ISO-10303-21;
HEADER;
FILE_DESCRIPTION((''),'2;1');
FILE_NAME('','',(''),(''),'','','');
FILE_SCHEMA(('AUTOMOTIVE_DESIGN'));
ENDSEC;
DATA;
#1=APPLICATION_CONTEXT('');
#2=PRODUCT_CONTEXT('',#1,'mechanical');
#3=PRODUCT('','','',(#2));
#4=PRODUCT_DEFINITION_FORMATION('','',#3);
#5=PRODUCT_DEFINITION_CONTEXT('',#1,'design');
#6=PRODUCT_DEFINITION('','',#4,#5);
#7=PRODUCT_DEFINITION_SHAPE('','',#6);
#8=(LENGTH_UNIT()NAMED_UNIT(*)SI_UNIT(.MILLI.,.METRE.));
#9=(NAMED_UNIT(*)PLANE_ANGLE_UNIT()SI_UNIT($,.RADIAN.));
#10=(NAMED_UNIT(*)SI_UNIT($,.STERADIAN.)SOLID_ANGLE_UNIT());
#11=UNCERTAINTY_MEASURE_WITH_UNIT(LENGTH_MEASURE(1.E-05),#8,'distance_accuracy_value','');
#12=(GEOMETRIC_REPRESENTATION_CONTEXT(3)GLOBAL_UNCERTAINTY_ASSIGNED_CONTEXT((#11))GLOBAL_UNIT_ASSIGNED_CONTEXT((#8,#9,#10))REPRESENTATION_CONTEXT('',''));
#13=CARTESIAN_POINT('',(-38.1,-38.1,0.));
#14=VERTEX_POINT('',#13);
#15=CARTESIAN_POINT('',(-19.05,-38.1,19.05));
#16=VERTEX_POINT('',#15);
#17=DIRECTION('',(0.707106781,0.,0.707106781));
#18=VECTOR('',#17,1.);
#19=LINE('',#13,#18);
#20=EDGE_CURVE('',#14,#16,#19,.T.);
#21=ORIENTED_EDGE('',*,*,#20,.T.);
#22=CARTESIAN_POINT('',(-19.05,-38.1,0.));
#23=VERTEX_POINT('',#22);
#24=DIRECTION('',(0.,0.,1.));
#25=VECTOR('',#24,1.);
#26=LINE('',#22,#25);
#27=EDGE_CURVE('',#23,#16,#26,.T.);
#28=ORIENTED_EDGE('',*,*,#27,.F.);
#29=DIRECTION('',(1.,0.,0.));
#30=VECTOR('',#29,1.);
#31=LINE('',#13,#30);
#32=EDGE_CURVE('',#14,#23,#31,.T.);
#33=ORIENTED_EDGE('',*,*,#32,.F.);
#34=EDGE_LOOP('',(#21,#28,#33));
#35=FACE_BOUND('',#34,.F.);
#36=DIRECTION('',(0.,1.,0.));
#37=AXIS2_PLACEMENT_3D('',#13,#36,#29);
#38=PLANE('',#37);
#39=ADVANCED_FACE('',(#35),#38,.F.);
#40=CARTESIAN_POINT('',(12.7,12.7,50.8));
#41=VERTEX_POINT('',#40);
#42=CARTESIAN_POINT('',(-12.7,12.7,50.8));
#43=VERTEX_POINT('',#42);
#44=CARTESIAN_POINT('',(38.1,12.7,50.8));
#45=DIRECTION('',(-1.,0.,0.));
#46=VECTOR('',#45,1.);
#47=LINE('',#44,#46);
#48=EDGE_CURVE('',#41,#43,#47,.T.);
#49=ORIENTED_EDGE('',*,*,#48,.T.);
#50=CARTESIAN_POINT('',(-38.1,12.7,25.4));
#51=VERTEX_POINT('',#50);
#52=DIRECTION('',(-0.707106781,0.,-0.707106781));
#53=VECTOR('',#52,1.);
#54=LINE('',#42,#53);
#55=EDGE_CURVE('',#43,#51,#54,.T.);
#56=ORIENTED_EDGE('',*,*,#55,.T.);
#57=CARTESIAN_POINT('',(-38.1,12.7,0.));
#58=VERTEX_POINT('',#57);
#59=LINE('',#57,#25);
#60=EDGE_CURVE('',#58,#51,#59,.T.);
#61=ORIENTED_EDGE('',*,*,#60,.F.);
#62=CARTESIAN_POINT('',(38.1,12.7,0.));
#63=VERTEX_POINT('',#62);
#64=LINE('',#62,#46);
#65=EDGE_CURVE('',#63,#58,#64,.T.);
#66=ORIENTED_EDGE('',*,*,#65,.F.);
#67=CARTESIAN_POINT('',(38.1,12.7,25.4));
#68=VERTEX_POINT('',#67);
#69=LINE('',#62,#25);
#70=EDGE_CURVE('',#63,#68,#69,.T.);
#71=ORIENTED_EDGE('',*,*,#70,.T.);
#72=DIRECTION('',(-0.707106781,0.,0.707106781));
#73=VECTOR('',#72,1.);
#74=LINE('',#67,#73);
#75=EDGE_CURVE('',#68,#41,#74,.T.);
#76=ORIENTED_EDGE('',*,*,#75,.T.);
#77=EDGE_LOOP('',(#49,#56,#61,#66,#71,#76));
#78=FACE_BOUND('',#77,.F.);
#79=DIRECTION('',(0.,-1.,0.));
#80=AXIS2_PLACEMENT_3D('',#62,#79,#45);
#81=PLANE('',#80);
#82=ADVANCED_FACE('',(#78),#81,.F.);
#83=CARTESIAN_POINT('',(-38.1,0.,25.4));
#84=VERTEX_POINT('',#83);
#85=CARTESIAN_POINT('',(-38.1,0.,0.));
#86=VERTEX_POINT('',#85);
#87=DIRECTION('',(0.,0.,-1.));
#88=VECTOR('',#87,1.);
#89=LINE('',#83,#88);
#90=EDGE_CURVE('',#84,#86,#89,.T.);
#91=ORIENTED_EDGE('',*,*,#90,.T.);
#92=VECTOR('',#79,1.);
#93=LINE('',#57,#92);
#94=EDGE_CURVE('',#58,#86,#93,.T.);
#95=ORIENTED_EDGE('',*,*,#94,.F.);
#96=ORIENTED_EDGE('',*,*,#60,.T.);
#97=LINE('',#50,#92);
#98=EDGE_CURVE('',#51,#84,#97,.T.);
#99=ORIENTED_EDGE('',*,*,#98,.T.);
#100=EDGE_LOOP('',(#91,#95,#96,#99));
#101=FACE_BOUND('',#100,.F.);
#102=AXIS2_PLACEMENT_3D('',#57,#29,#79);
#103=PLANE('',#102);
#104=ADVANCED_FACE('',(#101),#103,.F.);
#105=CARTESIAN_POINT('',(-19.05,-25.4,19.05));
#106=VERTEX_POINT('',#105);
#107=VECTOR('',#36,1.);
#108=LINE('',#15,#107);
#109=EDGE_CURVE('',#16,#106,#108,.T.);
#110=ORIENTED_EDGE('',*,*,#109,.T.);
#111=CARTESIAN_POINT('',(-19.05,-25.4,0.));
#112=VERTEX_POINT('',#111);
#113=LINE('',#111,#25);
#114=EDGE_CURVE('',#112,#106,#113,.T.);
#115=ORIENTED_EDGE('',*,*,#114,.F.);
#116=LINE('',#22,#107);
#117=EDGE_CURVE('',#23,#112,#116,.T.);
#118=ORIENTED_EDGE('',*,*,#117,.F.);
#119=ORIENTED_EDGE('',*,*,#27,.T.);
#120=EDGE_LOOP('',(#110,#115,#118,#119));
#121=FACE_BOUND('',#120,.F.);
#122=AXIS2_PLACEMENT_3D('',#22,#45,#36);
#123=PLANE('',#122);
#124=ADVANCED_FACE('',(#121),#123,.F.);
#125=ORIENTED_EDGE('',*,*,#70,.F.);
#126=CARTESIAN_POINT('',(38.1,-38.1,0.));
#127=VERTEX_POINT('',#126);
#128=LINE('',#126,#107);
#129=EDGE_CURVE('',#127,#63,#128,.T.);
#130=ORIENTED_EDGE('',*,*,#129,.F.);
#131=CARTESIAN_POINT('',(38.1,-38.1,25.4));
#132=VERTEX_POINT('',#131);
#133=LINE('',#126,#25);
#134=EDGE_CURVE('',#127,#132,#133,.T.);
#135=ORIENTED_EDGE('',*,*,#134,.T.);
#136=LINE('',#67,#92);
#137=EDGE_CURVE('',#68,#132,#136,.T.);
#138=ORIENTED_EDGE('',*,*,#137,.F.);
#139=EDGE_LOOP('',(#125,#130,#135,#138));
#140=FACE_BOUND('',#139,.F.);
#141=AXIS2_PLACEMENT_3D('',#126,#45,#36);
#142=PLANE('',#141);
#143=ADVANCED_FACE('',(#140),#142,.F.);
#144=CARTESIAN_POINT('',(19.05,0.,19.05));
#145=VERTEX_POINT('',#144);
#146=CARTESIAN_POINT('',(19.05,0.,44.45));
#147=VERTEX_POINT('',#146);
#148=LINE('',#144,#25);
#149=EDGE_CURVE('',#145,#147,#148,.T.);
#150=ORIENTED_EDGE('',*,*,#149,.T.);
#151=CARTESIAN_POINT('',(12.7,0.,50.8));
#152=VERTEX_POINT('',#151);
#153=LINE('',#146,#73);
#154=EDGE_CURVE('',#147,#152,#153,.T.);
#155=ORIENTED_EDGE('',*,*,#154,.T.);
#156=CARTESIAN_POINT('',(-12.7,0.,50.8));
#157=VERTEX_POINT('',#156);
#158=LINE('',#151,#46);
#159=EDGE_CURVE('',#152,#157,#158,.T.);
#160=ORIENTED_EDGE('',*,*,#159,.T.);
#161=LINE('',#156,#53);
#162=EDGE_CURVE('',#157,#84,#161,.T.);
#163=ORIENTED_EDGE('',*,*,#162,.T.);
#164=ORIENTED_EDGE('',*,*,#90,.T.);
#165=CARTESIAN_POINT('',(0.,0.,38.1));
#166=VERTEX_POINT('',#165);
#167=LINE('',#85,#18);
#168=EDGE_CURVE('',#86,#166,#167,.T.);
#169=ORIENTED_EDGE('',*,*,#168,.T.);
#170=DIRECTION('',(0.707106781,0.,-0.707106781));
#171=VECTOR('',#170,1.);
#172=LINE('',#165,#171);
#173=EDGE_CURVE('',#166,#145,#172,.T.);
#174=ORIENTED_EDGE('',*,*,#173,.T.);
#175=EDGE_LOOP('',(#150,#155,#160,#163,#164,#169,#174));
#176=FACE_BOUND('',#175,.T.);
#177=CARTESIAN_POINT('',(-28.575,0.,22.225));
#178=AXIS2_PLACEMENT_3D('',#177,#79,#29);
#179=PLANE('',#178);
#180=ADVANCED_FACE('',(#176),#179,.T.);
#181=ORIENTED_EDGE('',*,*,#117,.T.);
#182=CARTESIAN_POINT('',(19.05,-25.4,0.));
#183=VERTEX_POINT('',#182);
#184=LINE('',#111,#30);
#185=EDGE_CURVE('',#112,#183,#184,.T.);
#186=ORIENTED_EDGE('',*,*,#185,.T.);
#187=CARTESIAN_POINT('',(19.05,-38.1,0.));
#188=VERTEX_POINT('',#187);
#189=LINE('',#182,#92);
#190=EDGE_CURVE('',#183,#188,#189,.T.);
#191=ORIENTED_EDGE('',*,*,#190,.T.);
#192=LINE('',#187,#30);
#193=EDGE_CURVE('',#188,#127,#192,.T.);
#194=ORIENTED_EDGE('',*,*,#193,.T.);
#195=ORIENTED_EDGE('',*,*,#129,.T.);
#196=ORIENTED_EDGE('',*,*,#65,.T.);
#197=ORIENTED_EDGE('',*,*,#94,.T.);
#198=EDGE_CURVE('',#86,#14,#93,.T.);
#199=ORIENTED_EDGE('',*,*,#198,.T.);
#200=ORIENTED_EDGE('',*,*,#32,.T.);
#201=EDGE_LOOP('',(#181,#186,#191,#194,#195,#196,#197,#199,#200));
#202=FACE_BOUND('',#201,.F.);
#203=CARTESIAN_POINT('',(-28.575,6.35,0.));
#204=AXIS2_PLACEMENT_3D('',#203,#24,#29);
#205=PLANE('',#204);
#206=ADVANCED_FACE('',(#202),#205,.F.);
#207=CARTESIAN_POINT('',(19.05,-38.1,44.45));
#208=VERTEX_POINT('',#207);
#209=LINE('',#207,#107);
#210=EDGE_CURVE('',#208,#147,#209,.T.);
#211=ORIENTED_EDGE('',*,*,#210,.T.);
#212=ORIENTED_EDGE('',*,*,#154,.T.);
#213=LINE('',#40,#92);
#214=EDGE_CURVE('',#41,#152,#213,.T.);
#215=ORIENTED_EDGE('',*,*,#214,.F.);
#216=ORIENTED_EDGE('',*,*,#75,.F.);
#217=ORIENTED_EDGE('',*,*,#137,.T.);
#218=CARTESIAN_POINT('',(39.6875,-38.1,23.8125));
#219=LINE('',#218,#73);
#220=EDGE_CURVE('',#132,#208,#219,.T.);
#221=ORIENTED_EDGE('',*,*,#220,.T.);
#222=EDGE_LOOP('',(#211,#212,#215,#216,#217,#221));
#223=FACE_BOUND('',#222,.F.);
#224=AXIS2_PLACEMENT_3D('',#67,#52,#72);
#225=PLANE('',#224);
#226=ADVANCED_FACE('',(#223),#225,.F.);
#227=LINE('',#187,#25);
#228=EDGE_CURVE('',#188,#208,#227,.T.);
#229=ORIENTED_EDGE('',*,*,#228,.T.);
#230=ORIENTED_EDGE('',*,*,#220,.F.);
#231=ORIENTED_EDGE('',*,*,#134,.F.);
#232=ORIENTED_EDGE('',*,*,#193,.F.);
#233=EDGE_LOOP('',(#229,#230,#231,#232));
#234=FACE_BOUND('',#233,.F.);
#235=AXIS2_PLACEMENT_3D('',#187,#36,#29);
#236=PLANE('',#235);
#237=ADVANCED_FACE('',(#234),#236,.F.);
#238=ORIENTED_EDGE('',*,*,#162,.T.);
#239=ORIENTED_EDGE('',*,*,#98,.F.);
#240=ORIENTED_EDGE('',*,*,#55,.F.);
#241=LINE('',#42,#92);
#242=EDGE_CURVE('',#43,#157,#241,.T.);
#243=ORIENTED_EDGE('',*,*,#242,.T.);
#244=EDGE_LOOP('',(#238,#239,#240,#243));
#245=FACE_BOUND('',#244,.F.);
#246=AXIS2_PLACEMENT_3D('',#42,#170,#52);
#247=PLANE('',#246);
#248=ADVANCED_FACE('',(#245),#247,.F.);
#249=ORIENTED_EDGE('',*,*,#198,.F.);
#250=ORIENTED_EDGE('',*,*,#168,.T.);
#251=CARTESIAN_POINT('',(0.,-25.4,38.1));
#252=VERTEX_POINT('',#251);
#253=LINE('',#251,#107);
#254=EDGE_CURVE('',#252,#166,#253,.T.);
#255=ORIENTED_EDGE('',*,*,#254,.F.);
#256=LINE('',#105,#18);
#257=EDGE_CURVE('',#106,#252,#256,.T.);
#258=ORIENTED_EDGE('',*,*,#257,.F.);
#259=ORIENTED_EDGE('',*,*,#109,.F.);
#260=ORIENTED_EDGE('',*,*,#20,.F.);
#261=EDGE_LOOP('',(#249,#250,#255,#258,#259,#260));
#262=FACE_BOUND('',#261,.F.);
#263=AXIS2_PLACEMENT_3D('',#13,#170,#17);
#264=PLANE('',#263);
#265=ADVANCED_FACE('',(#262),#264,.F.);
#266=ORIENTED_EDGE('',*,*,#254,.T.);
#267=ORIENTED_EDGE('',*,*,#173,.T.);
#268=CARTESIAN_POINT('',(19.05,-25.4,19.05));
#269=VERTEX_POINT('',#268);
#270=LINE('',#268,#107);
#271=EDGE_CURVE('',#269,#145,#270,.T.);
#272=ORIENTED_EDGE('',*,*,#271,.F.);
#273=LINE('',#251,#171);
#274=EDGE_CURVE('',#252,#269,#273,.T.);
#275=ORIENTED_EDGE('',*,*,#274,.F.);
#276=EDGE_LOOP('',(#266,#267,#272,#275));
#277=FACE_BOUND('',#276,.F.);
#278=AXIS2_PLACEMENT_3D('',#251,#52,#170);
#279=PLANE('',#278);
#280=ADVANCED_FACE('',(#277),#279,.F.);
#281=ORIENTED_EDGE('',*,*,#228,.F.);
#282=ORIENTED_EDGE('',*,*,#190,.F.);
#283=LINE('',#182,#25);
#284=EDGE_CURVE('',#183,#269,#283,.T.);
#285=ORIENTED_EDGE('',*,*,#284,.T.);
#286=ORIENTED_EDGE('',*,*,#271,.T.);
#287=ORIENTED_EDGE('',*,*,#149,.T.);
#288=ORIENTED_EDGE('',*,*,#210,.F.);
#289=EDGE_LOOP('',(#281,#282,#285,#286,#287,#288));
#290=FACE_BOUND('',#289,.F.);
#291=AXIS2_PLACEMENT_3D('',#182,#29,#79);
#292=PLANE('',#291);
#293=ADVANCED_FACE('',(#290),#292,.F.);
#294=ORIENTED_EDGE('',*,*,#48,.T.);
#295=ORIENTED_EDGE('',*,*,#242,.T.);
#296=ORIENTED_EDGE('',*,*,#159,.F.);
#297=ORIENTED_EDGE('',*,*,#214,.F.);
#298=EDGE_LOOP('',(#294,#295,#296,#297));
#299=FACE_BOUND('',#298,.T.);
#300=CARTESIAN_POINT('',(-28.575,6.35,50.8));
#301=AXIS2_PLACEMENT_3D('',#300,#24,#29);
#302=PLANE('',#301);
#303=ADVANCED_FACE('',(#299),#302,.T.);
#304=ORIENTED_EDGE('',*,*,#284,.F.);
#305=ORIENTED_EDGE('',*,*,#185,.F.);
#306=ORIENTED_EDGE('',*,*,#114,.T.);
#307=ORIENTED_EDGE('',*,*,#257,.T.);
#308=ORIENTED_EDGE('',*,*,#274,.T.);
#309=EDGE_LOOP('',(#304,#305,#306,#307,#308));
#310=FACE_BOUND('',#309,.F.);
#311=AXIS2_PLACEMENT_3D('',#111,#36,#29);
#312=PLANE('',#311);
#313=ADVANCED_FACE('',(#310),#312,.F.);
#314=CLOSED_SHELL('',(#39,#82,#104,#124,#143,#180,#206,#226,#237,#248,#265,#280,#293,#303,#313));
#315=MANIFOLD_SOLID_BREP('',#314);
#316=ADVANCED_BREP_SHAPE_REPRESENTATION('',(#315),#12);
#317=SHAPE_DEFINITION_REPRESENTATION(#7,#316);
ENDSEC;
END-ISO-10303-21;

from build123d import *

# Parameters (mm, degrees)
F0_W     = 19.05
F0_H     = 12.7
F0_W_2   = 31.75
F1_DEPTH = 50.8
F3_DEPTH = 50.801
F7_DEPTH = 38.1
F8_DEPTH = 25.4


# Not quite as in the source:
# - a feature names something its author has since deleted; it is built from what else it names


with BuildPart() as f1:
    # F0 (on Top) → F1 (new body)
    with BuildSketch(Plane.XY):
        with Locations((-28.575, 6.35)):
            Rectangle(F0_W, F0_H)
        with Locations((22.225, 6.35)):
            Rectangle(F0_W_2, F0_H)
        Polygon((-19.05, 0), (0, 0), (6.35, 0), (6.35, 12.7), (-19.05, 12.7), align=None)
        Polygon((6.35, 0), (0, 0), (38.1, -38.1), (38.1, 0), align=None)
        Polygon((-38.1, -38.1), (0, 0), (-19.05, 0), (-38.1, 0), align=None)
        Polygon((38.1, -38.1), (0, 0), (-38.1, -38.1), (-19.05, -38.1), (-19.05, -25.4), (19.05, -25.4), (19.05, -38.1), align=None)
    extrude(amount=F1_DEPTH)

    # F2 (on face) → F3 (cut, through all)
    with BuildSketch(Plane(origin=(0, 12.7, 0), x_dir=(-1, 0, 0), z_dir=(0, 1, 0))):
        Polygon((-38.1, 50.8), (-38.1, 25.4), (-12.7, 50.8), align=None)
        Polygon((38.1, 50.8), (12.7, 50.8), (38.1, 25.4), align=None)
    extrude(amount=-F3_DEPTH, mode=Mode.SUBTRACT)

    # F4 (on face) → F7 (cut)
    with BuildSketch(Plane.XZ.offset(38.1)):
        Polygon((-38.1, 25.4), (-38.1, 0), (-19.05, 19.05), (-19.05, 44.45), align=None)
    extrude(amount=-F7_DEPTH, mode=Mode.SUBTRACT)

    # F5 (on face) → F8 (cut)
    with BuildSketch(Plane.XZ.offset(25.4)):
        Polygon((-19.05, 44.45), (-19.05, 19.05), (0, 38.1), (19.05, 19.05), (19.05, 44.45), (12.7, 50.8), (-12.7, 50.8), align=None)
    extrude(amount=-F8_DEPTH, mode=Mode.SUBTRACT)


solid = f1.part
